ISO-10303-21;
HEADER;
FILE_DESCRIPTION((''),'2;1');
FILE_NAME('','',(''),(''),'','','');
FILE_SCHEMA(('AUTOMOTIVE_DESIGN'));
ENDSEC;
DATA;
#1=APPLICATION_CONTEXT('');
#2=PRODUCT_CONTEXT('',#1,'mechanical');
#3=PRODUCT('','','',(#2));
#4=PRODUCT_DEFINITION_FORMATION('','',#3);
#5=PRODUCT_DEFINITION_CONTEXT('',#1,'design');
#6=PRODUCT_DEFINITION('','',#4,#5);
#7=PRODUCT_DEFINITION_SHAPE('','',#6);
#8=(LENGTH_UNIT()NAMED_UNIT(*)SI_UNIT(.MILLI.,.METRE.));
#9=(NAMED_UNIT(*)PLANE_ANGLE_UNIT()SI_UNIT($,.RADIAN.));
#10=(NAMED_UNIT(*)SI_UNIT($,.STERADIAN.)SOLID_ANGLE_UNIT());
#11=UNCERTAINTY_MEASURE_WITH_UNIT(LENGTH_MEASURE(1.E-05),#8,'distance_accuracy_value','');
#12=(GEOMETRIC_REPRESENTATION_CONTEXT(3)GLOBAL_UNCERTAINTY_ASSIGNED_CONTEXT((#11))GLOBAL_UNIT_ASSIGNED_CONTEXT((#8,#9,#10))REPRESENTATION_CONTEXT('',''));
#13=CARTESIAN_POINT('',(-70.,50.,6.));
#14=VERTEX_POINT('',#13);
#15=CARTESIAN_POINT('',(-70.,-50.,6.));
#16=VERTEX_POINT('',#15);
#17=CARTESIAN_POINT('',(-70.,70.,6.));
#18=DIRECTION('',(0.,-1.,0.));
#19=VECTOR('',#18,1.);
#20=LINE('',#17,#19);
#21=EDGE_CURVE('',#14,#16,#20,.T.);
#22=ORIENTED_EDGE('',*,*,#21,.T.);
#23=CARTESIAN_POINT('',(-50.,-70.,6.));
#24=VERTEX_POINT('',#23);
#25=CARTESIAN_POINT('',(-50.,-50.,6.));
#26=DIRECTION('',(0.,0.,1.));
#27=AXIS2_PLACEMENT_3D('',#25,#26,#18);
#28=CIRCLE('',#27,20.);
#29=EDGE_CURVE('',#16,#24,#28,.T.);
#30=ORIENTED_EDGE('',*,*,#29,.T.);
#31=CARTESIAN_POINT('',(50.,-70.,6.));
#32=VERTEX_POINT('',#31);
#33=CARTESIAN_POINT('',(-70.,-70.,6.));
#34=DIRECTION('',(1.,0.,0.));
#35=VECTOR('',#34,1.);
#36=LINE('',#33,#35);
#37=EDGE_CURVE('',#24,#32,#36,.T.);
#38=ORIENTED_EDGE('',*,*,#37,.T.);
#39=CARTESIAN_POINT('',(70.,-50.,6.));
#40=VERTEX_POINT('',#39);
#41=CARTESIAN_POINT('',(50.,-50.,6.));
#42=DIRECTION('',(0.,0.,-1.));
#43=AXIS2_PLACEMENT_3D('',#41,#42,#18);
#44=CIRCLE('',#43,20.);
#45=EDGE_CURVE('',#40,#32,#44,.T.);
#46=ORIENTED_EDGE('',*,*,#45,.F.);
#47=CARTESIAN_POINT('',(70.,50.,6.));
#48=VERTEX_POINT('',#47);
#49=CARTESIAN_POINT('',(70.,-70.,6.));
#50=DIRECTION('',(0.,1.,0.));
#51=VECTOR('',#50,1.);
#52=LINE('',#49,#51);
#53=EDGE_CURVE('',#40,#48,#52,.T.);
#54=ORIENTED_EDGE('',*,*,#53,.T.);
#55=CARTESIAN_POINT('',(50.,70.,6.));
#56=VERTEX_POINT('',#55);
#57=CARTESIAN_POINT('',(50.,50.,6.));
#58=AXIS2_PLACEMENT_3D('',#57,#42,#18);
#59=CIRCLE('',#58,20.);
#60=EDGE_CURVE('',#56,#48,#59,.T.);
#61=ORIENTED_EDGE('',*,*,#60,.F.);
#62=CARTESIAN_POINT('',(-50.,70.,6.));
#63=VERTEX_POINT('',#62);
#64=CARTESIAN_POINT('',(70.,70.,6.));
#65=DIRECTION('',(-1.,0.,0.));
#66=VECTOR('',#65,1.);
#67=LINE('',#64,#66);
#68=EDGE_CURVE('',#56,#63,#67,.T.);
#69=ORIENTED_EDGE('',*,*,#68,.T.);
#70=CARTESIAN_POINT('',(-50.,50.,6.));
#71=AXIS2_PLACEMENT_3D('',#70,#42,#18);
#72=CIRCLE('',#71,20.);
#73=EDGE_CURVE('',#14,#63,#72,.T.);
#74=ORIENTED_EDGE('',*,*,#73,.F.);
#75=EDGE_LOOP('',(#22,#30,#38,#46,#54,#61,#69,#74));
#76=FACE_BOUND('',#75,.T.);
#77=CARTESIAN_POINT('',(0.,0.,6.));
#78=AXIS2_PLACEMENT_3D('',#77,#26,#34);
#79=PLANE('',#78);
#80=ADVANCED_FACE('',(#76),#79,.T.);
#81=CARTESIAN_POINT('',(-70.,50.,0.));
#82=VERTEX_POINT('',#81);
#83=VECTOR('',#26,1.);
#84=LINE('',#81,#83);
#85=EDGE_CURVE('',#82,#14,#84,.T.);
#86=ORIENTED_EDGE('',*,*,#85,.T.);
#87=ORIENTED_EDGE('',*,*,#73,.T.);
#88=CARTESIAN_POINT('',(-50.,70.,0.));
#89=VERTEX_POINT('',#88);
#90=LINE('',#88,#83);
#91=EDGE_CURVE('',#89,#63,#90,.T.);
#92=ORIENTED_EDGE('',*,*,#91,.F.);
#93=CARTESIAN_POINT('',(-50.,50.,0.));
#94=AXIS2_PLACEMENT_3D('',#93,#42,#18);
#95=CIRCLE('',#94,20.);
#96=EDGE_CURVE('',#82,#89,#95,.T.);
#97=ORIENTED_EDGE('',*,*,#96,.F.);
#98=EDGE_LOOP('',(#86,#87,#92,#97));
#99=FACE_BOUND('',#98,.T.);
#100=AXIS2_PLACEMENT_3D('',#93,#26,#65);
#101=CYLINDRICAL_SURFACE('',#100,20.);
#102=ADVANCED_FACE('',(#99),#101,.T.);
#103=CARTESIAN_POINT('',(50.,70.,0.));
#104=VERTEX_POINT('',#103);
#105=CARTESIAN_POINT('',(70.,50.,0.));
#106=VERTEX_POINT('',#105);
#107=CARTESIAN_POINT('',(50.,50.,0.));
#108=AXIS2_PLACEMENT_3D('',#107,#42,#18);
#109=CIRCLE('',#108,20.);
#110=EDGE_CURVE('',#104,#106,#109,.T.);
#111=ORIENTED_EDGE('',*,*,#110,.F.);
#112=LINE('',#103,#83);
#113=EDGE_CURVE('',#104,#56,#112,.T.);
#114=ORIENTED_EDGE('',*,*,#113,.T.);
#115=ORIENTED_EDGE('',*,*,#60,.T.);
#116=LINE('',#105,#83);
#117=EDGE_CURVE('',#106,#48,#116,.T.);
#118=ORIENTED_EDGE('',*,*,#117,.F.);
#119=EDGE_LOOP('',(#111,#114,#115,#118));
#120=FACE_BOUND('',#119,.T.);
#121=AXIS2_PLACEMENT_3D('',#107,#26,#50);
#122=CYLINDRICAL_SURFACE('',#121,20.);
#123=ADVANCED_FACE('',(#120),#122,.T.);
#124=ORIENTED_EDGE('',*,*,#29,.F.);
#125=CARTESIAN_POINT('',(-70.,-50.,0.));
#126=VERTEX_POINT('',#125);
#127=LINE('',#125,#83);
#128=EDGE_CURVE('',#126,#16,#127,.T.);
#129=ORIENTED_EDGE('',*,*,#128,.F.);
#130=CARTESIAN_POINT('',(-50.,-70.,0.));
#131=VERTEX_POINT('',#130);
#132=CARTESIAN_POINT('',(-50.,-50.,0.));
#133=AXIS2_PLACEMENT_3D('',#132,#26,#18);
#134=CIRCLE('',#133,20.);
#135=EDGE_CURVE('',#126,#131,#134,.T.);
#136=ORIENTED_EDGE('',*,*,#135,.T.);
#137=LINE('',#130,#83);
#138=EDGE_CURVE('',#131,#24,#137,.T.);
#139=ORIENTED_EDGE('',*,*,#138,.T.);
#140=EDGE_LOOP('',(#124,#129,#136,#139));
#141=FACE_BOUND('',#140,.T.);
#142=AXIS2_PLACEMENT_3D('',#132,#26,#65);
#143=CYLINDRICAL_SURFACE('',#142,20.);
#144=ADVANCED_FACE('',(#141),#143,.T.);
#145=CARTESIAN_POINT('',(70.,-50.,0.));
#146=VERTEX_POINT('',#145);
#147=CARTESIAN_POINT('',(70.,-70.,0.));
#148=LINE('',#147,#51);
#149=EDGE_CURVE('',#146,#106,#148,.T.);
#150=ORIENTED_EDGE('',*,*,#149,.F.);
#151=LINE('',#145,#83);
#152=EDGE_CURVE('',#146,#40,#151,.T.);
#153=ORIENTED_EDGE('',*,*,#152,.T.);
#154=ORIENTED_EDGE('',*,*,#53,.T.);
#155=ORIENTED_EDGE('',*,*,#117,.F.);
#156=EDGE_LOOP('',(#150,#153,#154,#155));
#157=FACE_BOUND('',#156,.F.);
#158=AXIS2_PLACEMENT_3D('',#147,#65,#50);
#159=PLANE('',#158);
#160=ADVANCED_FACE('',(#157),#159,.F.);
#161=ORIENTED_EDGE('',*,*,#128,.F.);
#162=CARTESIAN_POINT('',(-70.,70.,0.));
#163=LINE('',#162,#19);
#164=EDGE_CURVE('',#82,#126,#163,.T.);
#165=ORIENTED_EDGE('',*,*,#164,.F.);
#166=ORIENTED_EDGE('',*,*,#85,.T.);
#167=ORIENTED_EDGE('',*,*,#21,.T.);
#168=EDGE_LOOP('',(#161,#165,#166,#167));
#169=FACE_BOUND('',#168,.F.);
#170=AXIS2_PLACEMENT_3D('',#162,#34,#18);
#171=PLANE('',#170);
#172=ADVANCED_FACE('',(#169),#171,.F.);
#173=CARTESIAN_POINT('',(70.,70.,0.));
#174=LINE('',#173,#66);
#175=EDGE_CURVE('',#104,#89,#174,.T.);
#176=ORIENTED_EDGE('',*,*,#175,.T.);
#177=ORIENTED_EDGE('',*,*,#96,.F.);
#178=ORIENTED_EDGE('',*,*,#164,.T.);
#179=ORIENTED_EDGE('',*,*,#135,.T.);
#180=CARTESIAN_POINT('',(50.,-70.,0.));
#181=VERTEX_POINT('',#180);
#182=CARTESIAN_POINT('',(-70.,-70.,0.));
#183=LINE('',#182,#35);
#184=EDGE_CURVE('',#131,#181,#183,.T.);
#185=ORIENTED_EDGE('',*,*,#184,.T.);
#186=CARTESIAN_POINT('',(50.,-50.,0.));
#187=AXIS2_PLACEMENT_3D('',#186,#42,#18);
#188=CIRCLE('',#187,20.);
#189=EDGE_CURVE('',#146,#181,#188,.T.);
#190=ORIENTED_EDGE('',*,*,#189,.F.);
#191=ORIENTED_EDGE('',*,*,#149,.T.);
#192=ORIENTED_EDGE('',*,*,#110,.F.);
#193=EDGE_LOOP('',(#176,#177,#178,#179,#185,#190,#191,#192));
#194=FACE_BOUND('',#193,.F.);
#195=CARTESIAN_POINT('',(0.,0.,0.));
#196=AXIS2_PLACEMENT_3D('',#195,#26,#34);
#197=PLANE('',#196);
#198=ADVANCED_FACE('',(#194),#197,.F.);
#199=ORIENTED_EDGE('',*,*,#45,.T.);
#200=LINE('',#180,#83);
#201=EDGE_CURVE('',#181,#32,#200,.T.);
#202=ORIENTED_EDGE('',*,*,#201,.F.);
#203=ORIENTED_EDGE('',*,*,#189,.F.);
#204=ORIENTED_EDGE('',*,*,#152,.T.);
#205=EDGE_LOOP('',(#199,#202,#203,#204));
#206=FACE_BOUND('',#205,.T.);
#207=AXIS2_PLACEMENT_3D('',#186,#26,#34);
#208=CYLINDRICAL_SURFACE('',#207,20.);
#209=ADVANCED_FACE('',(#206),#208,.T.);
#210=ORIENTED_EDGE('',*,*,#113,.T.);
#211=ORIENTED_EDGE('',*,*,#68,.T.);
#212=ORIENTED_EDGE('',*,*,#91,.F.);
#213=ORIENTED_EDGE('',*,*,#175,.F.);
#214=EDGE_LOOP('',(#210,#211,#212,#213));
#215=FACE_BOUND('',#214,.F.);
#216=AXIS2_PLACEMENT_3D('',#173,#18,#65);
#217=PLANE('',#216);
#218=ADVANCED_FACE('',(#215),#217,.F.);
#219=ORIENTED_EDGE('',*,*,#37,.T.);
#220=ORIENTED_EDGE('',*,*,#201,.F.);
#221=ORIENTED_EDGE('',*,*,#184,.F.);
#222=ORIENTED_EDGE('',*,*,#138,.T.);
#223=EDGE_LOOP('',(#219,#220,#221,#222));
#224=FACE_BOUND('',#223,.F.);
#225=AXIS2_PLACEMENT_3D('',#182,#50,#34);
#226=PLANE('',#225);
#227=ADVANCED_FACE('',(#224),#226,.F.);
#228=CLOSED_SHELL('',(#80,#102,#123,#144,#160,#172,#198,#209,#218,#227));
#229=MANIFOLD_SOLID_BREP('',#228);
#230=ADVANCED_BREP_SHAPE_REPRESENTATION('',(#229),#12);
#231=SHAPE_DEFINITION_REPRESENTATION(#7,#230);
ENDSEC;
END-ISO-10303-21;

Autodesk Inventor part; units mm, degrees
ref_plane "YZ Plane" through (0, 0, 0) normal (1, 0, 0) x (0, 1, 0)
ref_plane "XZ Plane" through (0, 0, 0) normal (0, 1, 0) x (-1, 0, 0)
ref_plane "XY Plane" through (0, 0, 0) normal (0, 0, 1) x (1, 0, 0)
sketch "Sketch1" plane through (0, 0, 0) normal (0, 0, 1) x (1, 0, 0)
  line L0 (-70, -70) -> (70, -70)
  line L1 (70, -70) -> (70, 70)
  line L2 (70, 70) -> (-70, 70)
  line L3 (-70, 70) -> (-70, -70)
  line L4 (-70, -70) -> (70, 70) construction
  line L5 (70, -70) -> (-70, 70) construction
  point P0 (0, 0)
  dimension "d0" = 140
  dimension "d1" = 140
extrude "Plate1" add sketch "Sketch1" along normal blind 6
fillet "Corner Round1" radius 20 4 edges at (70, -70, 3) (-70, -70, 3) (-70, 70, 3) (70, 70, 3)
sketch "Sketch5" plane through (0, 0, 6) normal (0, 0, 1) x (1, 0, 0)
  line L0 (70, 50) -> (70, -50) projected
  line L1 (70, 40) -> (-70, 40)
  line L2 (-70, -50) -> (-70, 50) projected
  line L3 (-50, 70) -> (50, 70) projected
  point P0 (0, 0)
  dimension "d23" = 30
feature "Fold1" [suppressed]
equation "\"d0\" = d1"
equation "\"d2\" = Thickness"
equation "\"d24\" = BendReliefWidth"
equation "\"d25\" = BendReliefDepth"
equation "\"d26\" = MinimumRemnant"
equation "\"d27\" = TransitionRadius"
equation "\"d29\" = BendRadius"
equation "\"BendReliefWidth\" = Thickness"
equation "\"BendReliefDepth\" = 0.5 * Thickness"
equation "\"CornerReliefSize\" = 4 * Thickness"
equation "\"MinimumRemnant\" = 2 * Thickness"
equation "\"TransitionRadius\" = BendRadius"
equation "\"JacobiRadiusSize\" = BendRadius"
equation "\"GapSize\" = Thickness"
equation "\"Thickness\" = 6"
equation "\"BendRadius\" = 5"
properties part number "PRS 1694 leg plate for filter" material "Stainless Steel"
